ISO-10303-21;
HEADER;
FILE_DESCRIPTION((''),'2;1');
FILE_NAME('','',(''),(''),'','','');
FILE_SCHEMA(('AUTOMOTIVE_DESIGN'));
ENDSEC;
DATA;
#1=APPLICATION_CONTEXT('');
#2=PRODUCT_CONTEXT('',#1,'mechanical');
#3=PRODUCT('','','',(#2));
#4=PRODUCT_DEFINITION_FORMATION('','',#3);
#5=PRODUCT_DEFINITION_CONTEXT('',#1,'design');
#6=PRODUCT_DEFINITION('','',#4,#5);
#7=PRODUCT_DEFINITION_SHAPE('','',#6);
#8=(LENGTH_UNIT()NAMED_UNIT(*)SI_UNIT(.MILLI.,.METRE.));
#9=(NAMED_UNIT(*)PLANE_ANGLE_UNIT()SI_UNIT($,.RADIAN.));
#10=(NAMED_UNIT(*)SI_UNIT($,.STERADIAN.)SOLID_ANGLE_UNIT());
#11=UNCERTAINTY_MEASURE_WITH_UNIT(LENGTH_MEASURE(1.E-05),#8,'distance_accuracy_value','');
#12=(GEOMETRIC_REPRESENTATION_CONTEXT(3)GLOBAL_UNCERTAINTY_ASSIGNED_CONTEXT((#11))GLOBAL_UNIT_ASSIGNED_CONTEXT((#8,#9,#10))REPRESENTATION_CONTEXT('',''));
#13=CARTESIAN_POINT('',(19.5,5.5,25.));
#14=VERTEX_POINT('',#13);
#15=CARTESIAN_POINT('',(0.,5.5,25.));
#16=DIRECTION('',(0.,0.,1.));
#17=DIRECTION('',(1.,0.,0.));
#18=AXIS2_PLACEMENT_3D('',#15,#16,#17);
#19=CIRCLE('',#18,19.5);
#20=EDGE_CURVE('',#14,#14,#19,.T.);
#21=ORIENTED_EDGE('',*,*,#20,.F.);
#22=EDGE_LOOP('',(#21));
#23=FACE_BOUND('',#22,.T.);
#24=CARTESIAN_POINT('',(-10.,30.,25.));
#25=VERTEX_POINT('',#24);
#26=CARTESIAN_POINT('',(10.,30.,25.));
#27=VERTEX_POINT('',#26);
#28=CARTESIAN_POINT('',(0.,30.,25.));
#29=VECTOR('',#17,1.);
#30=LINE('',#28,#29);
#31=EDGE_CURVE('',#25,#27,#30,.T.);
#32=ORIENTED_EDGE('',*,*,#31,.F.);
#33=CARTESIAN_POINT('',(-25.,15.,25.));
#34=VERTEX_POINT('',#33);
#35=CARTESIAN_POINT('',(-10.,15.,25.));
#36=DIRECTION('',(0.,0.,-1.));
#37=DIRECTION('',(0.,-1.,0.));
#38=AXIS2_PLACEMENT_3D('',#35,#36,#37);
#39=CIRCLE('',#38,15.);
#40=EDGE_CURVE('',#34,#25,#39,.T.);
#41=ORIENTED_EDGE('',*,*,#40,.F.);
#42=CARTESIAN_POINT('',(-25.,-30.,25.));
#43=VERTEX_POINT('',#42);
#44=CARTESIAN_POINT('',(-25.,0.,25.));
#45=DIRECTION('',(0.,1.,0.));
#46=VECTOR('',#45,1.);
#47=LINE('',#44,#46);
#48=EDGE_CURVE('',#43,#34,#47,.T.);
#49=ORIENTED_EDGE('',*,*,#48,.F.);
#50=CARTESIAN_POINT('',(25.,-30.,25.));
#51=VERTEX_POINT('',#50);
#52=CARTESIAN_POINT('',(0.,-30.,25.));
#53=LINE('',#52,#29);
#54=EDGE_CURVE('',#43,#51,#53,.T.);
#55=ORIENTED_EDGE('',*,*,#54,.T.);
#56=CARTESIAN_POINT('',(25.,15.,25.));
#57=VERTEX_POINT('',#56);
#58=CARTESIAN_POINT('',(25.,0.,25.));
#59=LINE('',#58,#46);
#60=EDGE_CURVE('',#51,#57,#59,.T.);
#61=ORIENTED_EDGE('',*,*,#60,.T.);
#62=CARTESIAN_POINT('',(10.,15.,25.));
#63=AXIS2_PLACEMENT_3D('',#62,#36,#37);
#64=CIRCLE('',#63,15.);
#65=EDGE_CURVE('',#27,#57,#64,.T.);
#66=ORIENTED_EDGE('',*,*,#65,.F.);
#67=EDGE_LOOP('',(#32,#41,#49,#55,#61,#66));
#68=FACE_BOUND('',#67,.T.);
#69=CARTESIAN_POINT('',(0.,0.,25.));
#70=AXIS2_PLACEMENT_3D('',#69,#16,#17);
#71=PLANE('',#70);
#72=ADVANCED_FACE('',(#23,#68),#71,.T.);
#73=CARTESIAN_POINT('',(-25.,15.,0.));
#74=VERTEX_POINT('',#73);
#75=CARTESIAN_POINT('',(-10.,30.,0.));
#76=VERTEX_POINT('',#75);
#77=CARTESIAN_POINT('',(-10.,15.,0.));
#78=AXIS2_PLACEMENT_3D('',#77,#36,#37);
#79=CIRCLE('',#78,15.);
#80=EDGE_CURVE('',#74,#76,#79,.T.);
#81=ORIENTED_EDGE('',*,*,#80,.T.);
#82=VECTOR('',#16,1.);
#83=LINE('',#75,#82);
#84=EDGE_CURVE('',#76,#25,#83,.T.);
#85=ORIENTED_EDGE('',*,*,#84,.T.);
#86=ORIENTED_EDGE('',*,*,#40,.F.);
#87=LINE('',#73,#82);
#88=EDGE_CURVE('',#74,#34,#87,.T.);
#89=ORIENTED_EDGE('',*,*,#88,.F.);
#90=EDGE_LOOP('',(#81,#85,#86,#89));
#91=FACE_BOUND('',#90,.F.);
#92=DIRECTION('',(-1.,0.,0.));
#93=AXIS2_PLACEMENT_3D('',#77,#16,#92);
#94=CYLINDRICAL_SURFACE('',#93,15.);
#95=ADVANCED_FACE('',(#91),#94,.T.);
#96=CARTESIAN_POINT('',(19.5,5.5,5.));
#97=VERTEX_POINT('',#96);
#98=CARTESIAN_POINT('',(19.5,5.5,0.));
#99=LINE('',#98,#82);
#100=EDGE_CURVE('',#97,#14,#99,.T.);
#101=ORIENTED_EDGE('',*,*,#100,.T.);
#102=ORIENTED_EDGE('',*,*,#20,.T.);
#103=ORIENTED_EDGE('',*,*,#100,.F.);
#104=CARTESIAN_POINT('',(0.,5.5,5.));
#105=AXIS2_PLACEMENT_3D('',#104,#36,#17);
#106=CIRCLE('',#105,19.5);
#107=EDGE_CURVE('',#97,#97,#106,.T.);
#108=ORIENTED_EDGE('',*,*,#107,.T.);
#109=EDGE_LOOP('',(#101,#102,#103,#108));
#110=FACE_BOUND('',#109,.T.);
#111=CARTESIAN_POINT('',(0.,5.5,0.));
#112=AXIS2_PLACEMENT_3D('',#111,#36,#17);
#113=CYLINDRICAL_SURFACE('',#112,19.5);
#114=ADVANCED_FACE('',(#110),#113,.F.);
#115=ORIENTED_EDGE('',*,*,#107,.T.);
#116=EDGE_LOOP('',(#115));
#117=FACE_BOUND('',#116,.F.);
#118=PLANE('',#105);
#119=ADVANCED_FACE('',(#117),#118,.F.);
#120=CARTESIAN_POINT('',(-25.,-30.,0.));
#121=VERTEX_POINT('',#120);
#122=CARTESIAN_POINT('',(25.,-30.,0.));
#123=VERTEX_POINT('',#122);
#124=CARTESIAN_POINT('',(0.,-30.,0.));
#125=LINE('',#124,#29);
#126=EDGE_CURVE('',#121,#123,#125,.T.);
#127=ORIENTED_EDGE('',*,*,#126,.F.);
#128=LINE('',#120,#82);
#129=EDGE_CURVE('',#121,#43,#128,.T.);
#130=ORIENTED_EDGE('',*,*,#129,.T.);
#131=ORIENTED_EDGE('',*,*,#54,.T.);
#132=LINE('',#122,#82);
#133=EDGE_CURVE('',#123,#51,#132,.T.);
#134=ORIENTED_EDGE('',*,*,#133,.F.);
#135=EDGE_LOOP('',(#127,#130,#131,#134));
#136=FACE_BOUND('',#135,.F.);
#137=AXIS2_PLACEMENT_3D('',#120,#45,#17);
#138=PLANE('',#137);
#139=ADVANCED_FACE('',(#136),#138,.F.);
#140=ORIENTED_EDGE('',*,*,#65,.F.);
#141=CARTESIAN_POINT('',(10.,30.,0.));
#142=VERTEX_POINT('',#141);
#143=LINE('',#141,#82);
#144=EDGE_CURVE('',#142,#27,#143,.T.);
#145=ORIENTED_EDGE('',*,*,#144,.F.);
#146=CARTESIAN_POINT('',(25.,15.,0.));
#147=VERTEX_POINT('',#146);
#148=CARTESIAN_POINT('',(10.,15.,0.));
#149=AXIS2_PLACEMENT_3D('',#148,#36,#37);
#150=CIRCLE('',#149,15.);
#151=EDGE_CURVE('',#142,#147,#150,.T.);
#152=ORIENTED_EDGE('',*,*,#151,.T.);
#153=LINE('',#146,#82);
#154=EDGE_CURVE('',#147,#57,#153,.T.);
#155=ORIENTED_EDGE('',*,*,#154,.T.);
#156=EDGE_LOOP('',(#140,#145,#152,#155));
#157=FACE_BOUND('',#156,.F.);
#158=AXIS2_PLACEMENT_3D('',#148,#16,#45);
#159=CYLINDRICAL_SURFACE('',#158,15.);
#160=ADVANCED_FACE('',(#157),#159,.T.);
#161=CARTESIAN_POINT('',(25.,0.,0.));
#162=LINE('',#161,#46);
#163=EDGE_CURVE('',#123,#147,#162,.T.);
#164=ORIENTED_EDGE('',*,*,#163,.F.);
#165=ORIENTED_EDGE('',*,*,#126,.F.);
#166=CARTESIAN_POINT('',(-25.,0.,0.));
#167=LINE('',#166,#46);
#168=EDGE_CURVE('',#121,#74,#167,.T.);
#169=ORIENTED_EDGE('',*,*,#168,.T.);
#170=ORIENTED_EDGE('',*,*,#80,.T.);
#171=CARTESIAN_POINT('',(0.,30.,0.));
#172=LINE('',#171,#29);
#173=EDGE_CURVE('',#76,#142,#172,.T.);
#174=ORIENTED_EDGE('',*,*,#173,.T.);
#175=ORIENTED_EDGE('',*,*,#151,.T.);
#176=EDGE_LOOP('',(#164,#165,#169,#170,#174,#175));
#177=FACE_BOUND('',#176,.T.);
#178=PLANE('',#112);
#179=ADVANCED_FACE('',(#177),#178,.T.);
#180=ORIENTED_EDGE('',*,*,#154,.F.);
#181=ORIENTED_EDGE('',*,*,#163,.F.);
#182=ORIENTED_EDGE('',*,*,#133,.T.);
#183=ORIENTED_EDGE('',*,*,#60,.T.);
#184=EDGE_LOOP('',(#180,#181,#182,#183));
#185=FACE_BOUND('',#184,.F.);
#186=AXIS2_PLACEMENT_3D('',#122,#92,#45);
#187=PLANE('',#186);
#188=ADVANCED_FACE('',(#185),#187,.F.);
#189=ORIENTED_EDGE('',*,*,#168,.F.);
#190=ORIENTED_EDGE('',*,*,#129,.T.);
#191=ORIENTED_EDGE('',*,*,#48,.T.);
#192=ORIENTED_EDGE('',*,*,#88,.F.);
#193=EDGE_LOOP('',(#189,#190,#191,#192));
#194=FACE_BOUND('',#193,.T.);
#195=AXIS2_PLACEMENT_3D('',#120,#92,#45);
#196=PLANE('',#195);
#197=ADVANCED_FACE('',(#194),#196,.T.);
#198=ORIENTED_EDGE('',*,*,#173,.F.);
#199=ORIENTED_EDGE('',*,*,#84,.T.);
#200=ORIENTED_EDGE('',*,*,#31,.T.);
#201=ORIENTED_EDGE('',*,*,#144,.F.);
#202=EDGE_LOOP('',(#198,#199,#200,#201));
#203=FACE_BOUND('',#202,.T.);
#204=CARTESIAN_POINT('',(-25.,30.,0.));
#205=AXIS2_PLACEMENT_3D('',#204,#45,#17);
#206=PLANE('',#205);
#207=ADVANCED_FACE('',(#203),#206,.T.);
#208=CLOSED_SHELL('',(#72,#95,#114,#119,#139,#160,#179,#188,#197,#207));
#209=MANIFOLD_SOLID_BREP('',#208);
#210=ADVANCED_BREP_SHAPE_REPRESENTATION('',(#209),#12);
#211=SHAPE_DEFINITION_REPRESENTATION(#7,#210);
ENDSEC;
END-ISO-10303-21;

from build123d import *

# Parameters (mm, degrees)
F0_W     = 50
F0_H     = 60
F0_R     = 19.5
F1_DEPTH = 25
F2_R     = 15
F3_R     = 15
F4_R     = 19.5
F5_DEPTH = 5


with BuildPart() as f1:
    # F0 (on Top) → F1 (new body)
    with BuildSketch(Plane.XY):
        Rectangle(F0_W, F0_H)
        with Locations((0, 5.5)):
            Circle(F0_R, mode=Mode.SUBTRACT)
    extrude(amount=F1_DEPTH)

    # F2
    f2_edges = [f1.edges().sort_by_distance(p)[0] for p in [
        (-25, 30, 12.5),
    ]]
    fillet(f2_edges, radius=F2_R)

    # F3
    f3_edges = [f1.edges().sort_by_distance(p)[0] for p in [
        (25, 30, 12.5),
    ]]
    fillet(f3_edges, radius=F3_R)

    # F4 (on face) → F5 (join)
    with BuildSketch(Plane(origin=(0, 0, 0), x_dir=(1, 0, 0), z_dir=(0, 0, -1))):
        with Locations((0, -5.5)):
            Circle(F4_R)
    extrude(amount=-F5_DEPTH)


solid = f1.part
